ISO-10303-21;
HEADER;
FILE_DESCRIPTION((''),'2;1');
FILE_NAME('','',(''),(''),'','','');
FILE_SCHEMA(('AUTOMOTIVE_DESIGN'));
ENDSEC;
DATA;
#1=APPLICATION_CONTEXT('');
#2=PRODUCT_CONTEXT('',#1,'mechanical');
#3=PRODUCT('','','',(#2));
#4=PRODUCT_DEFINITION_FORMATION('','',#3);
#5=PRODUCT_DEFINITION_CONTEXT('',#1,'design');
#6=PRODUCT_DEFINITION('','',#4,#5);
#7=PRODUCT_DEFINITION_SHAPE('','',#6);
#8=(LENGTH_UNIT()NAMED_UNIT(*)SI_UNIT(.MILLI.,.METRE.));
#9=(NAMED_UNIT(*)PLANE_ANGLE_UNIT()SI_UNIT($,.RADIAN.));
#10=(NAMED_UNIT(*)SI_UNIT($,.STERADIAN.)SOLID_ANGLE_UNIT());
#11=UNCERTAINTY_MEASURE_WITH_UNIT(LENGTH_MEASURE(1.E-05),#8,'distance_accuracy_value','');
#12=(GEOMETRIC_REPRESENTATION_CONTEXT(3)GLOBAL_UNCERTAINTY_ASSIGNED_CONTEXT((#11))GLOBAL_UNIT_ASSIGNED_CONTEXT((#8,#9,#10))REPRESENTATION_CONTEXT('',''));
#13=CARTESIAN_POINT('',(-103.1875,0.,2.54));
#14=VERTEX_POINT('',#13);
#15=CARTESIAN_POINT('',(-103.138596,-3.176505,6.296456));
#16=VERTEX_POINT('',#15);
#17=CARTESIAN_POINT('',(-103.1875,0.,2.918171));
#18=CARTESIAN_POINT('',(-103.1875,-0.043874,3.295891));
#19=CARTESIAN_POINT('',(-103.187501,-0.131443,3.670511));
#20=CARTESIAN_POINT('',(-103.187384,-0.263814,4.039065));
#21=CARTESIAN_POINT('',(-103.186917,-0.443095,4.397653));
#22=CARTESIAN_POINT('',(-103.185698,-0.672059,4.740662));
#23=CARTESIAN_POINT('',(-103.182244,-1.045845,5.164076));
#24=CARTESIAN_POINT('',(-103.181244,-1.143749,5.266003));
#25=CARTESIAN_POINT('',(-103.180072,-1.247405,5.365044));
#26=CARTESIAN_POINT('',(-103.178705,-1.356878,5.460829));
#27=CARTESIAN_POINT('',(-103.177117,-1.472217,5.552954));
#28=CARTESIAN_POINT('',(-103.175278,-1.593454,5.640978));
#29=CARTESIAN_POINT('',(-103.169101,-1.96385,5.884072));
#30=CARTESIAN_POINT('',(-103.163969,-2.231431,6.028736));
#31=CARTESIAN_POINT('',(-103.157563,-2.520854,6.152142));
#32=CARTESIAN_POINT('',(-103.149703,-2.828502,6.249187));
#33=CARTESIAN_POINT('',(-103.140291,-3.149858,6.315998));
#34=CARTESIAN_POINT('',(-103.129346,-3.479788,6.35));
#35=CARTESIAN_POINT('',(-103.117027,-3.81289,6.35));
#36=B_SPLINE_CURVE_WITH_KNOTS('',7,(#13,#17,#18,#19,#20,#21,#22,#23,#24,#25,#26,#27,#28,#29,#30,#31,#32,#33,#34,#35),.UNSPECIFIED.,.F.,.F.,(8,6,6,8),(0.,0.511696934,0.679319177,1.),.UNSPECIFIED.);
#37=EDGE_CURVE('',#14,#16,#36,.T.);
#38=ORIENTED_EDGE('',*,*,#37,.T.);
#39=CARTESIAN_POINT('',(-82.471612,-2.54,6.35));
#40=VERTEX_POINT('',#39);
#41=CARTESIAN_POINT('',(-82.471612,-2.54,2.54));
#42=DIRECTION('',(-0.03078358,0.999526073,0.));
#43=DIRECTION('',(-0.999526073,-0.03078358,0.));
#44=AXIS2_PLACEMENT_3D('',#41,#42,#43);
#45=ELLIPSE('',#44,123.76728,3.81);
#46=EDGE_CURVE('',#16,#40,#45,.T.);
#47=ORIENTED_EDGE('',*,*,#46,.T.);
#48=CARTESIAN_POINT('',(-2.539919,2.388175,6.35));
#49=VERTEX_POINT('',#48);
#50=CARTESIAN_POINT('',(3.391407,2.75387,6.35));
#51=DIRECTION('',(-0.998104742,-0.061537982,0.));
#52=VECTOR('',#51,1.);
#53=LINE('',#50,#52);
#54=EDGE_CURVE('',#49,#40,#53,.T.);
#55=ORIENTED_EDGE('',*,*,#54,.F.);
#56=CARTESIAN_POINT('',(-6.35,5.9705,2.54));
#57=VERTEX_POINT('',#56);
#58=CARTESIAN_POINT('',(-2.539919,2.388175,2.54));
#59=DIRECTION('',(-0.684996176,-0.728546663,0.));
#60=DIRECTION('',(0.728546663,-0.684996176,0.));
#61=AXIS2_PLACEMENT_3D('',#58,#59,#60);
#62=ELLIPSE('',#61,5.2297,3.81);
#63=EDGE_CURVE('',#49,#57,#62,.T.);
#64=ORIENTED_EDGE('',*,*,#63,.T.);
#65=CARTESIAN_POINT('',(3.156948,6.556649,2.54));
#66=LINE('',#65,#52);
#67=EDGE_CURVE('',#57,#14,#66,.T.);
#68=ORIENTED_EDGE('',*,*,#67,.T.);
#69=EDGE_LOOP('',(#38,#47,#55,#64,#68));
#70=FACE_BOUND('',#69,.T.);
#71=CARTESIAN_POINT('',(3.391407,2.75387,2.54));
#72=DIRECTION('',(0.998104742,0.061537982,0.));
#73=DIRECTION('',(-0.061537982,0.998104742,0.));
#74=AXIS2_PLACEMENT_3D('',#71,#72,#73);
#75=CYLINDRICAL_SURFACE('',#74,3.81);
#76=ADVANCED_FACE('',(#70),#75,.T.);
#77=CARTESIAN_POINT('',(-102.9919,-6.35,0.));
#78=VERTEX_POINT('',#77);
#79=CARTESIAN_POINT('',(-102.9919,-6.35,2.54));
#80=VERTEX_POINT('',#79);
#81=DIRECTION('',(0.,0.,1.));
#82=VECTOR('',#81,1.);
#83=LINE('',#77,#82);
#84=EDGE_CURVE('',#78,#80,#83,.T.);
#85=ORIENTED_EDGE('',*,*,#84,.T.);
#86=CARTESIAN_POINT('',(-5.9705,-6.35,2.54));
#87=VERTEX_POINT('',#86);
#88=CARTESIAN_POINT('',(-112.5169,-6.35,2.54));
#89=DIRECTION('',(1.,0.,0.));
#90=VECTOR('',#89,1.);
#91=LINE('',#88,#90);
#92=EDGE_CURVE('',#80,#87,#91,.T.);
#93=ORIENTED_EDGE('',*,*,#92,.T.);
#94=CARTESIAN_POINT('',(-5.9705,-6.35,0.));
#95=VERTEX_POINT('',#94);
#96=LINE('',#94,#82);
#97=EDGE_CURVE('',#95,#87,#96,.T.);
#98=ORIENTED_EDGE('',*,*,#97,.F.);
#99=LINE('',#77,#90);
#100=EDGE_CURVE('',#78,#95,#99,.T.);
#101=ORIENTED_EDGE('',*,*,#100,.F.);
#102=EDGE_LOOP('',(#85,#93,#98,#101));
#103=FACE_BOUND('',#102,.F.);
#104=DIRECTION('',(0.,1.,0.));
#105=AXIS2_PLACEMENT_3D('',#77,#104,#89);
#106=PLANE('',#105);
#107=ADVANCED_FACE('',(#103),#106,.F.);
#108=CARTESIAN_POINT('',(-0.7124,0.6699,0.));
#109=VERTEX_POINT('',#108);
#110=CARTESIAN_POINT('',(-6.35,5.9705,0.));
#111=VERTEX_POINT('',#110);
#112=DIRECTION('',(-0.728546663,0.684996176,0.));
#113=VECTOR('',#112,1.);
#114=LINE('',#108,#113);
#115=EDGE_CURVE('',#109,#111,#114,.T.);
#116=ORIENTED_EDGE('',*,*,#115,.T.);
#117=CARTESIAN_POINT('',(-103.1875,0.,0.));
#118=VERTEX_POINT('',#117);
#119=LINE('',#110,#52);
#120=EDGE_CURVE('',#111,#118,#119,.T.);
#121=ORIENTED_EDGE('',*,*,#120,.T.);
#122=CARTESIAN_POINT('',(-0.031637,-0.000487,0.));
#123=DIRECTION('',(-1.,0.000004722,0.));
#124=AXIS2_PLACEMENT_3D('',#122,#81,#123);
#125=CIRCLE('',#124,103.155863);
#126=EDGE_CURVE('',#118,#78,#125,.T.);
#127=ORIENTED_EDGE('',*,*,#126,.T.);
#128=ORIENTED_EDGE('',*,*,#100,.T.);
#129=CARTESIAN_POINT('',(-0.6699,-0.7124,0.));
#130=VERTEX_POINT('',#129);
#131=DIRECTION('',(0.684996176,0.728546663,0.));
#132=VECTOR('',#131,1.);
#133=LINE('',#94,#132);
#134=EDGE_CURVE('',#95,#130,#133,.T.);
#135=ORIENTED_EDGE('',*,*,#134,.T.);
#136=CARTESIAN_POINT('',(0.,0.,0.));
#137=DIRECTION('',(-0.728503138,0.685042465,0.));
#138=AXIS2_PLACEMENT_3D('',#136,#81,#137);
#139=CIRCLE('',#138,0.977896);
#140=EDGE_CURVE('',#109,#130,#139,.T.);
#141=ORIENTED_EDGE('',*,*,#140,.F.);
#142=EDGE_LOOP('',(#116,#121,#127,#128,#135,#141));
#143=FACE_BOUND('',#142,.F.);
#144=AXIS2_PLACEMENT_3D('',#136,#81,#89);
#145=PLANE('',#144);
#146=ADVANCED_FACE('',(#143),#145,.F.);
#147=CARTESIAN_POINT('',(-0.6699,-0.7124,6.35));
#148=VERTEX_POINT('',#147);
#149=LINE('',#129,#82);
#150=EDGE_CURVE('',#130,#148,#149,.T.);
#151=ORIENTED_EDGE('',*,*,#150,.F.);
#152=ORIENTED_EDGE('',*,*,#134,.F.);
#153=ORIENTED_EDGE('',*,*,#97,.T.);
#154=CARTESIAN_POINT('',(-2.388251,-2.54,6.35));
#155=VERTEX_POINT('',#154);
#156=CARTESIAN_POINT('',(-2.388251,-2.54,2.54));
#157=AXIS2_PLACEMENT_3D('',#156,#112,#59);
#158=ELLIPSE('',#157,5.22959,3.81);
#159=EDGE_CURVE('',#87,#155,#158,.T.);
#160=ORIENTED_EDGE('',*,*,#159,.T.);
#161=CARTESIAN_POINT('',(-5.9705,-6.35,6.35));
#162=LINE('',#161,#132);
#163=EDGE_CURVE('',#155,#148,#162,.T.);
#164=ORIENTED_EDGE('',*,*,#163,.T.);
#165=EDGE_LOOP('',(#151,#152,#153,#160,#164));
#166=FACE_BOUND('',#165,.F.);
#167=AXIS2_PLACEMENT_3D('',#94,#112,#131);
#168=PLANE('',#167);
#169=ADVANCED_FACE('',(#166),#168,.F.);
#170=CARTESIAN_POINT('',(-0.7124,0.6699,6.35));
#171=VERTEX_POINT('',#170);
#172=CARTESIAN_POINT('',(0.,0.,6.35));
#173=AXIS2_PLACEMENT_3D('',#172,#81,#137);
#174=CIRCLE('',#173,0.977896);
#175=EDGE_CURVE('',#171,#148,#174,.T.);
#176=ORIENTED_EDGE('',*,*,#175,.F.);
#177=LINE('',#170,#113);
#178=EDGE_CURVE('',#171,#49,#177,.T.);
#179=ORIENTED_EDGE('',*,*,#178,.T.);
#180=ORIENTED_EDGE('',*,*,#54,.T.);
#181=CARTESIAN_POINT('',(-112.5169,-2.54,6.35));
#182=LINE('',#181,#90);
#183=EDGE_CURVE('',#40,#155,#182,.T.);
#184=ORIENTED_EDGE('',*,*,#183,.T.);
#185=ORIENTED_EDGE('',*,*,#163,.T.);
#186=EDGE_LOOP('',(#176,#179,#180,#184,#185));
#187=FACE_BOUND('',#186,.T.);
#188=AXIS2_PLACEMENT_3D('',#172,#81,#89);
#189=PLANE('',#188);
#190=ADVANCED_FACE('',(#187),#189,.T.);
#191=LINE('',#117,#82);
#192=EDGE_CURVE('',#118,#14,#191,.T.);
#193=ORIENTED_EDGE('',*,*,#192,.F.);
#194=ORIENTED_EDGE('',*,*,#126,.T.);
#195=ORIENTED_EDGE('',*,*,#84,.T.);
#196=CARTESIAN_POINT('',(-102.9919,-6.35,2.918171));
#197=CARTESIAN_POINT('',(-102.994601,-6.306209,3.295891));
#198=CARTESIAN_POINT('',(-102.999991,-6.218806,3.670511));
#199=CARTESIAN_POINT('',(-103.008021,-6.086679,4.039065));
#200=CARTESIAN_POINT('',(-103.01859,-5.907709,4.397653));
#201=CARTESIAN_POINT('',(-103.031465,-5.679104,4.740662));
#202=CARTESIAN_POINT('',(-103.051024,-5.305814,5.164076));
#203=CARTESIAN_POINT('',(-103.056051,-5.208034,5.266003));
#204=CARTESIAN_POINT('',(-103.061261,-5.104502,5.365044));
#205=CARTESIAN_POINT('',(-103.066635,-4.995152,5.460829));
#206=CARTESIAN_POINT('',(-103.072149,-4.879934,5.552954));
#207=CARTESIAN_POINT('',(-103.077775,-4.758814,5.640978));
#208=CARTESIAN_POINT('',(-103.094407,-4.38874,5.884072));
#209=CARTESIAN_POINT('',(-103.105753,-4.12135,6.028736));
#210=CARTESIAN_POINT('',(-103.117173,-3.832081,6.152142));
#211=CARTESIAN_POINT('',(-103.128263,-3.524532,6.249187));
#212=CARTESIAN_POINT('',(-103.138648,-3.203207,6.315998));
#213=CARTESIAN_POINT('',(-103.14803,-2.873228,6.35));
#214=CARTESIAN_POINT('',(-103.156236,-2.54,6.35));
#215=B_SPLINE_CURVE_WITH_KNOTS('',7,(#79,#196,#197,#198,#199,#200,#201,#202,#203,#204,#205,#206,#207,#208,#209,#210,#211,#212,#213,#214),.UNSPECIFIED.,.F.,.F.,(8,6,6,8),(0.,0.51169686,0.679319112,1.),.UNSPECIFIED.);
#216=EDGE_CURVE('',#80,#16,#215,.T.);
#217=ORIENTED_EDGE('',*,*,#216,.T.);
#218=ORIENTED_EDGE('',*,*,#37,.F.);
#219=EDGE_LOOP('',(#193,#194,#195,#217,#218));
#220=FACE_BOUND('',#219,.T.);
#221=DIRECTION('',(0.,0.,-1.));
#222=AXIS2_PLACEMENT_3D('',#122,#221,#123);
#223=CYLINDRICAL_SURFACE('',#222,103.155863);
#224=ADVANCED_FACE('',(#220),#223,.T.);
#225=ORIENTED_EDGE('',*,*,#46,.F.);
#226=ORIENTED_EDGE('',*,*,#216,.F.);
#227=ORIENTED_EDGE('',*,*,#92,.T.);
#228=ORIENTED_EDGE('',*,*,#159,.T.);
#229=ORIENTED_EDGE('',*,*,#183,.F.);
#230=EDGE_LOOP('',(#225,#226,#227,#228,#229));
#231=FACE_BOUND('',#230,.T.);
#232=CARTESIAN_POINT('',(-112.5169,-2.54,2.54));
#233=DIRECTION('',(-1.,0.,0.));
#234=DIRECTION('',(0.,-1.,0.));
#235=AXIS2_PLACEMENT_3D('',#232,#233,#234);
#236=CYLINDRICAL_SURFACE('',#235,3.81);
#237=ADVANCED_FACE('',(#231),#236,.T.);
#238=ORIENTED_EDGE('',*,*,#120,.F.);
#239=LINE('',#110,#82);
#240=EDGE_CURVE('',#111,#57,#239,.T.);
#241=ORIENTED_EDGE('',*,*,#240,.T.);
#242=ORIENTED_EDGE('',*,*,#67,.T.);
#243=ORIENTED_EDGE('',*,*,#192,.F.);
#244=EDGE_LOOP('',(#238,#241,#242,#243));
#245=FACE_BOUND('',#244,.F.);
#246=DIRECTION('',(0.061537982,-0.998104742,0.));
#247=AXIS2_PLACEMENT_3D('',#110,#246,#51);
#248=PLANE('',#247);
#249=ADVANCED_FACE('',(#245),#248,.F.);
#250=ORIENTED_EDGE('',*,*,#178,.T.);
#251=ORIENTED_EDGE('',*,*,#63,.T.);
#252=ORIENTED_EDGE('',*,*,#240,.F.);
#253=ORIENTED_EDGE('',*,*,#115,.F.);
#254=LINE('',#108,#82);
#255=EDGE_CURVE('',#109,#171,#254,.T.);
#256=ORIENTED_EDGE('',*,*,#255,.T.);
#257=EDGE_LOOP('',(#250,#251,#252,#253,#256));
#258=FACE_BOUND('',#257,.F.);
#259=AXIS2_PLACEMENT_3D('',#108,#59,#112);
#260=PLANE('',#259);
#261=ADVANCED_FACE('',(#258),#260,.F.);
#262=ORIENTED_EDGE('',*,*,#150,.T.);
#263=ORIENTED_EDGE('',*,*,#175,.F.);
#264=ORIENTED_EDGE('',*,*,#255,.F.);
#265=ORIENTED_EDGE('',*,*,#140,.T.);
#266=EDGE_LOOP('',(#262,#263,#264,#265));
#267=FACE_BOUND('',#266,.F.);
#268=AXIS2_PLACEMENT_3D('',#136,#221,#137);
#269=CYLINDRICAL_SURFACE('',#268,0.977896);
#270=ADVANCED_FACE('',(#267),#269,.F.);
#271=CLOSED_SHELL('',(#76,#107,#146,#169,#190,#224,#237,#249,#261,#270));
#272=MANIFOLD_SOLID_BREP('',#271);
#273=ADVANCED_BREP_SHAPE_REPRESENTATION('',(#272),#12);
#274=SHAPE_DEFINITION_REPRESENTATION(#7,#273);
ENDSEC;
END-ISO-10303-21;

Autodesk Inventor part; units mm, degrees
ref_plane "YZ Plane" through (0, 0, 0) normal (1, 0, 0) x (0, 1, 0)
ref_plane "XZ Plane" through (0, 0, 0) normal (0, 1, 0) x (-1, 0, 0)
ref_plane "XY Plane" through (0, 0, 0) normal (0, 0, 1) x (1, 0, 0)
sketch "Sketch1" plane through (0, 0, 0) normal (0, 0, 1) x (1, 0, 0)
  line L0 (-0.7124, 0.6699) -> (-6.35, 5.9705)
  line L1 (-6.35, 5.9705) -> (-103.1875, 0)
  line L2 (-102.9919, -6.35) -> (-5.9705, -6.35)
  line L3 (-5.9705, -6.35) -> (-0.6699, -0.7124)
  arc A0 (-103.1875, 0) -> (-102.9919, -6.35) centre (0, 0) ccw
  arc A1 (-0.7124, 0.6699) -> (-0.6699, -0.7124) centre (0, 0) ccw
  line L4 (0, 0) -> (-0.7124, 0.6699) construction
  line L5 (0, 0) -> (-0.6699, -0.7124) construction
  dimension "d0" = 103.1875
  dimension "d1" = 6.35
  dimension "d2" = 103.1875
  dimension "d3" = 6.35
  dimension "d7" = 1.9558
extrude "Extrusion1" add sketch "Sketch1" along normal blind 6.35
fillet "Fillet2" radius 3.81 2 edges at (-54.4812, -6.35, 6.35) (-54.7687, 2.9853, 6.35)
properties part number "Thrust_Support"
